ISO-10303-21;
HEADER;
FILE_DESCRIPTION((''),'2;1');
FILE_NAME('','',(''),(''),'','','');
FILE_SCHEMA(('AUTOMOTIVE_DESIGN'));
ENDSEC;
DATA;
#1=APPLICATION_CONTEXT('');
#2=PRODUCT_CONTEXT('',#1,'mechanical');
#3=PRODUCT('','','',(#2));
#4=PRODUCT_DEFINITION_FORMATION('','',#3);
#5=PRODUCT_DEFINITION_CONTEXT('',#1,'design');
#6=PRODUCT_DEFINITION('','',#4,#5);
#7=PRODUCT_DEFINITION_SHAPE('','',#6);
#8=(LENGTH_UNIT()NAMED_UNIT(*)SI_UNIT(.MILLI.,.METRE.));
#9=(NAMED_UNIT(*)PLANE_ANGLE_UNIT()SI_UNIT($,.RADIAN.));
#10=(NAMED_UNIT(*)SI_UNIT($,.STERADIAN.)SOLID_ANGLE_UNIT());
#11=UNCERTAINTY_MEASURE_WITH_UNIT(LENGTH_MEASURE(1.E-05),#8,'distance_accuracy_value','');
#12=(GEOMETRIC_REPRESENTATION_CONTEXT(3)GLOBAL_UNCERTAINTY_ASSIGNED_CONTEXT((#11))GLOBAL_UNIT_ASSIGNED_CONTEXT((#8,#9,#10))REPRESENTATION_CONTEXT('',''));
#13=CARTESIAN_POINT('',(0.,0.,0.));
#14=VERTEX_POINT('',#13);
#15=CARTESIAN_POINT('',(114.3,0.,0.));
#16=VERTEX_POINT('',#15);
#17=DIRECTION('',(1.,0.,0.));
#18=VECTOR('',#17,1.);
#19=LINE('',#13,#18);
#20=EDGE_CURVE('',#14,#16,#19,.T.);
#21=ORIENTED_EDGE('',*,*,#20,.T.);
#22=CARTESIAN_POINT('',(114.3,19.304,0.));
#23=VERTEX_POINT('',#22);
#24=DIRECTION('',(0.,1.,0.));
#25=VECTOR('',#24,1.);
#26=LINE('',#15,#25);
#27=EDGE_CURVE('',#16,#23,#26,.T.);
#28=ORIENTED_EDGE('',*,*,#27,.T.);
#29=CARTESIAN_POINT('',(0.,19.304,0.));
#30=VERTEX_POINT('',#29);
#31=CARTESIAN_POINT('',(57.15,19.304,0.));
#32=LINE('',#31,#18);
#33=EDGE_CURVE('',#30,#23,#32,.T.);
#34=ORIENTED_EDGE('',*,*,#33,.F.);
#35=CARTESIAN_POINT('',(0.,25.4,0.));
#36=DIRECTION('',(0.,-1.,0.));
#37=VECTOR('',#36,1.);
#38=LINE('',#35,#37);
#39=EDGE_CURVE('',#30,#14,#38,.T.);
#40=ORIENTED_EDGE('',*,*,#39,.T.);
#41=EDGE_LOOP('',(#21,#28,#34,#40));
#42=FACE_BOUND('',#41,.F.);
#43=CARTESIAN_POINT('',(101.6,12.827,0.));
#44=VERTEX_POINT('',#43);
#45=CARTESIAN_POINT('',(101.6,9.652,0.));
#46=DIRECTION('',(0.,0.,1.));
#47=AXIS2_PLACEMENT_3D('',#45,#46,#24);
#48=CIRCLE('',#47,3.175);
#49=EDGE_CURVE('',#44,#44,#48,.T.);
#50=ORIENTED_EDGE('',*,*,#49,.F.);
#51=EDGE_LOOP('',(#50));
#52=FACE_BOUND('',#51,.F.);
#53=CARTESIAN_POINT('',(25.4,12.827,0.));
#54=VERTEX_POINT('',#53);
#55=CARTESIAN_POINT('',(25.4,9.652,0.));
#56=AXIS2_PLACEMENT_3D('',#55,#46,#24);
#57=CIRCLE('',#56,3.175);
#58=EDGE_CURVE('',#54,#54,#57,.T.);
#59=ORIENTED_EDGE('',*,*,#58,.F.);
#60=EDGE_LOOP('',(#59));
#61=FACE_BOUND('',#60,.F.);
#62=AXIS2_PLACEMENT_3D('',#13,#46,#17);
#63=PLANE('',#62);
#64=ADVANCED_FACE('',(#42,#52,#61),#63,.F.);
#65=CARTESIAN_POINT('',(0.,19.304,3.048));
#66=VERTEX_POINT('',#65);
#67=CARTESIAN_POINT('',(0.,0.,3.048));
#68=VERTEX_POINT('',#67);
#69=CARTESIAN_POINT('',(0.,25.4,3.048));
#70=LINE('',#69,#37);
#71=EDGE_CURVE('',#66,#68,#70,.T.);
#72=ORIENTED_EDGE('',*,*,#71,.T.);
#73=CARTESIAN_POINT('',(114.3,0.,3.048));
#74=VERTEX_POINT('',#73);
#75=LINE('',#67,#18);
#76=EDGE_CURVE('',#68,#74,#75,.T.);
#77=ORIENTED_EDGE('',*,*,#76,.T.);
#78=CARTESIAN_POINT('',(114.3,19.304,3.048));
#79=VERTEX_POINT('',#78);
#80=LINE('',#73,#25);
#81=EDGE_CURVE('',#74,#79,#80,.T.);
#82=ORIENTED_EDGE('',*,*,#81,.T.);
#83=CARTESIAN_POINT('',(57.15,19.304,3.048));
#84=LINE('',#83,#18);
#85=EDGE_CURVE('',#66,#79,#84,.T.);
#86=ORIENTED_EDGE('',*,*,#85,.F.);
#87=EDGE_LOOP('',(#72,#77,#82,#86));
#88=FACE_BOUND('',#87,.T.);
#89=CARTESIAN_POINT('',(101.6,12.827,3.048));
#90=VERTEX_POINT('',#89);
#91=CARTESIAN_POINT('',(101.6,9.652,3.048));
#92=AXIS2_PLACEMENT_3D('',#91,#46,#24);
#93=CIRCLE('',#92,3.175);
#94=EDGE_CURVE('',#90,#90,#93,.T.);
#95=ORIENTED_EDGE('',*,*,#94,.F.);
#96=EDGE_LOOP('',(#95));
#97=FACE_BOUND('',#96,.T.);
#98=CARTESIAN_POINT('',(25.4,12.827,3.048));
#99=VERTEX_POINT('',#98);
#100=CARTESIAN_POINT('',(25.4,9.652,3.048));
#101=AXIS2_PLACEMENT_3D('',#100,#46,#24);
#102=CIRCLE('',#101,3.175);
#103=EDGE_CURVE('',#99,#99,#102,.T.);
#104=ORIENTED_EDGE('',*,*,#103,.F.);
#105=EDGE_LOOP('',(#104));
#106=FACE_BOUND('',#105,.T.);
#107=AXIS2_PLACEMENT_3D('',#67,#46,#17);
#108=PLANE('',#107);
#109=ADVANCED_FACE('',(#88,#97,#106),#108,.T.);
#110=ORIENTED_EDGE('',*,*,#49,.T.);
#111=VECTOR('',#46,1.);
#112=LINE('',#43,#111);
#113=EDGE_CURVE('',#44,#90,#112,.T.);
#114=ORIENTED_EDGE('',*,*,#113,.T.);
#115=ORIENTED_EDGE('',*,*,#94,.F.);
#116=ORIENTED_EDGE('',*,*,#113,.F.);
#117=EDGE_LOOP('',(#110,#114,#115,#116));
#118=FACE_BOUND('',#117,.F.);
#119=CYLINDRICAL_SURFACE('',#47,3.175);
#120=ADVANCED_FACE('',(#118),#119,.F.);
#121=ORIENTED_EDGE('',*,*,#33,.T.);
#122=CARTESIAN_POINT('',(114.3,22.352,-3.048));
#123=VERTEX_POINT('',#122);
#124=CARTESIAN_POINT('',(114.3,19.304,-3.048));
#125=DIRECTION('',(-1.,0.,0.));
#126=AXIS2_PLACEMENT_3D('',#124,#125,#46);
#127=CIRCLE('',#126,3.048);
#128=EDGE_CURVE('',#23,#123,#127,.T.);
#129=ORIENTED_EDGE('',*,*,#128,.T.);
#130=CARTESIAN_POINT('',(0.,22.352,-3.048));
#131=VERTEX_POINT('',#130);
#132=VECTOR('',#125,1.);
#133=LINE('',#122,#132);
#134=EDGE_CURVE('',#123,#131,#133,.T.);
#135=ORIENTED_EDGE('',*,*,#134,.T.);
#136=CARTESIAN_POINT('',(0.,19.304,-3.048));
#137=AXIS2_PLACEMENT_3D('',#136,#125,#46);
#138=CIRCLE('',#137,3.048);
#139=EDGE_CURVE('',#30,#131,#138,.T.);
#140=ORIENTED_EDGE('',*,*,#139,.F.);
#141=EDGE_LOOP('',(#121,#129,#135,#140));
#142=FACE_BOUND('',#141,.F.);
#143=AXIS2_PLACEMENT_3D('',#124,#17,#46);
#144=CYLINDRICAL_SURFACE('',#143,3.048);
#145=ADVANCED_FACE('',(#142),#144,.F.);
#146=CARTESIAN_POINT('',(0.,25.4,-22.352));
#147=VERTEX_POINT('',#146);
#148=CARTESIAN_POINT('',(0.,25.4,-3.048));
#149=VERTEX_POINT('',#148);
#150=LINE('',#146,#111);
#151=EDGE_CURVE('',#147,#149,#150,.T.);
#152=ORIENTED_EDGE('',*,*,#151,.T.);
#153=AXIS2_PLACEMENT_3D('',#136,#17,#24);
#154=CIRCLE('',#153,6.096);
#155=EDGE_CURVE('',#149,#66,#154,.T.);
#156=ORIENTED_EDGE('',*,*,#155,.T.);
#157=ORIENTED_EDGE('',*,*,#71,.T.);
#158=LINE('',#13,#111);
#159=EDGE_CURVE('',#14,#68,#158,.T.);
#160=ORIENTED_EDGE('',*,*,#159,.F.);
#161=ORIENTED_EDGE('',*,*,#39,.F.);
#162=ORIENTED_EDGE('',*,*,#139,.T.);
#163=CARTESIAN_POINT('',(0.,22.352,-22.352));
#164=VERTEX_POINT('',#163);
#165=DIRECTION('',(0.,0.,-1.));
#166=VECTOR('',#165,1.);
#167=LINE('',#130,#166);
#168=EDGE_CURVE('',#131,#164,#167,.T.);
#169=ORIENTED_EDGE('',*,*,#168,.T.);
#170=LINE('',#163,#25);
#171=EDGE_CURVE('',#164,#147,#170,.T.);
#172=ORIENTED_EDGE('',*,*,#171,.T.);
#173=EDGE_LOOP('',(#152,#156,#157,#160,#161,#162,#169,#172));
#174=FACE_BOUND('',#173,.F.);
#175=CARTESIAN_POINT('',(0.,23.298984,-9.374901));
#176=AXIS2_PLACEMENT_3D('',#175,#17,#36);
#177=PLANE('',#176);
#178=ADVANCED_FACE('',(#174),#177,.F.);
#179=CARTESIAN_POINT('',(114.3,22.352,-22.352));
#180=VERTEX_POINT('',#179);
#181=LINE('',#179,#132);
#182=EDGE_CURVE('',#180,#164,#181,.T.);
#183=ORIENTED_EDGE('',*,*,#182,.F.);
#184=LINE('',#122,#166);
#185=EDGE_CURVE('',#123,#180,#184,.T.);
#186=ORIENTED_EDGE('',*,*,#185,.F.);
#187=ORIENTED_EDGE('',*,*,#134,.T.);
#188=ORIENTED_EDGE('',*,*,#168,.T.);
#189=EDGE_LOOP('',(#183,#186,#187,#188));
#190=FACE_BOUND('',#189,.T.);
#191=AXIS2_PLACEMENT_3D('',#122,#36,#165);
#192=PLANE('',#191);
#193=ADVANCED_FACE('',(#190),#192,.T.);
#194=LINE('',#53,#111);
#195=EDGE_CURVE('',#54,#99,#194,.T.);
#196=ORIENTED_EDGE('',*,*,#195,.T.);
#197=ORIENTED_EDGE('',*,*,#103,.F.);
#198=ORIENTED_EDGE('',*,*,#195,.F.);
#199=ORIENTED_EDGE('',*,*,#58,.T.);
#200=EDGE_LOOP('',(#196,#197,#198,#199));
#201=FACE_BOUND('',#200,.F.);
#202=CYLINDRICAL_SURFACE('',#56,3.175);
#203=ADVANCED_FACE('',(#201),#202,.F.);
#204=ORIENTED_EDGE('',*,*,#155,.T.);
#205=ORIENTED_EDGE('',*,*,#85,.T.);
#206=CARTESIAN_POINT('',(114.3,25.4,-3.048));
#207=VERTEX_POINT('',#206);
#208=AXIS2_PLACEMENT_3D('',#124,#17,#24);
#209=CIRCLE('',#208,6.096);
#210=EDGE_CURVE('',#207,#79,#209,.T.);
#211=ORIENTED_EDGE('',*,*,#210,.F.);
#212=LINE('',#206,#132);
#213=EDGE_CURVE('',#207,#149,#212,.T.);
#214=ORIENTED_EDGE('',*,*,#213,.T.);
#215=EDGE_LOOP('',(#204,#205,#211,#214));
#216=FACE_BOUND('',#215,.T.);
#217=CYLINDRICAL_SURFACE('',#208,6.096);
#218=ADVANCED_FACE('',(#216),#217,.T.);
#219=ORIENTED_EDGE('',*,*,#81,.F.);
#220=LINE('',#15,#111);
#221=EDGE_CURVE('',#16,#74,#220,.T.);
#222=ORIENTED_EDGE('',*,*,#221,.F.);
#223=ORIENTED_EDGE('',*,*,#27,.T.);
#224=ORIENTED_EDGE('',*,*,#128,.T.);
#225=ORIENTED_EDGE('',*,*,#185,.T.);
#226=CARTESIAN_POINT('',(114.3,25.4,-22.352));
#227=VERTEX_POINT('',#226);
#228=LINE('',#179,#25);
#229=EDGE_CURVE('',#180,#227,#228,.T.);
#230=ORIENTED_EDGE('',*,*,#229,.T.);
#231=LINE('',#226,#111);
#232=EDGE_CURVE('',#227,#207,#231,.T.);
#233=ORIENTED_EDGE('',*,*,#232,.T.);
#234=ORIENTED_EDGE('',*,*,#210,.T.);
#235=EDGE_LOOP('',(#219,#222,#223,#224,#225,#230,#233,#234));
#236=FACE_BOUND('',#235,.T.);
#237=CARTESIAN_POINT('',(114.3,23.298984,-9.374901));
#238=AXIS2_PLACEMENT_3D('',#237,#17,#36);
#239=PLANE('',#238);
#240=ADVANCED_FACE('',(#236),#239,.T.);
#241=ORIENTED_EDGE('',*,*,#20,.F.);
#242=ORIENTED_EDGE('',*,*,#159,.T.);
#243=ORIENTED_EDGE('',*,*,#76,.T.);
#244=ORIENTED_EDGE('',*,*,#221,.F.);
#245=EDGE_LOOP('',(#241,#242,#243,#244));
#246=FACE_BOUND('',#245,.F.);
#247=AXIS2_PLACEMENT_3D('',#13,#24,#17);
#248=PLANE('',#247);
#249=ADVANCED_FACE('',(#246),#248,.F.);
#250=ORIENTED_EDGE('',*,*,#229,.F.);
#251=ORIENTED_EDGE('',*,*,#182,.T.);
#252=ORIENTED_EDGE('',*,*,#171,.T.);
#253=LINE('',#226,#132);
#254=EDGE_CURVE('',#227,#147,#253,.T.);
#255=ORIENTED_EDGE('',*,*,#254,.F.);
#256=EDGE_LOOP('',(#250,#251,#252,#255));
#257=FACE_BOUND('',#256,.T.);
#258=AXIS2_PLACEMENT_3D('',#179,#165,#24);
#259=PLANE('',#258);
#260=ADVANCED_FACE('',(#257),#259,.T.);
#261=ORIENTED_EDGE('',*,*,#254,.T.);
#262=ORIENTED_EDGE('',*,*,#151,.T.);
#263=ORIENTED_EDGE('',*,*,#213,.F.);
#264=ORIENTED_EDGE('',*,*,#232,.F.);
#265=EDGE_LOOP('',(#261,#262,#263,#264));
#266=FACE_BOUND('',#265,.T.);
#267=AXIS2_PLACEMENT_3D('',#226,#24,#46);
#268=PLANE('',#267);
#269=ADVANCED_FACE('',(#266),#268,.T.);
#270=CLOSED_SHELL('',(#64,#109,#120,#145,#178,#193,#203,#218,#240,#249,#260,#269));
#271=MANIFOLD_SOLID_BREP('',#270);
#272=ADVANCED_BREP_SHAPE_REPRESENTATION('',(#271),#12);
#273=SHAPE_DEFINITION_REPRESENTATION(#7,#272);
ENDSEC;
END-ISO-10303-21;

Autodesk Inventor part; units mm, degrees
ref_plane "YZ Plane" through (0, 0, 0) normal (1, 0, 0) x (0, 1, 0)
ref_plane "XZ Plane" through (0, 0, 0) normal (0, 1, 0) x (-1, 0, 0)
ref_plane "XY Plane" through (0, 0, 0) normal (0, 0, 1) x (1, 0, 0)
sketch "Sketch1" plane through (0, 0, 0) normal (0, 0, 1) x (1, 0, 0)
  line L0 (0, 0) -> (114.3, 0)
  line L1 (114.3, 0) -> (114.3, 25.4)
  line L2 (114.3, 25.4) -> (0, 25.4)
  line L3 (0, 25.4) -> (0, 0)
  dimension "d0" = 114.3
  dimension "d1" = 25.4
extrude "Plate1" add sketch "Sketch1" along normal blind 3.048
sketch "Sketch2" plane through (114.3, 22.352, 3.048) normal (0, 1, 0) x (-1, 0, 0)
  line L0 (114.3, 0) -> (0, 0)
  line L1 (0, 0) -> (0, -25.4)
  line L2 (0, -25.4) -> (114.3, -25.4)
  line L3 (114.3, -25.4) -> (114.3, 0)
edge flange "Flange1" height 25.4 angle 90 thickness 3.048 bend radius 3.048 thickness toward (0, 1, 0) relief tear relief width 3.048 relief depth 1.524 edges at (57.15, 25.4, 0) wall of the first edge with corners at (0, 22.352, 3.048) (114.3, 22.352, 3.048) (114.3, 22.352, -22.352) (0, 22.352, -22.352)
bend "Bend1"
corner "Corner1"
hole "Hole1" at (101.6, 9.652, 0) direction (0, 0, 1) diameter 6.35 end through all
hole "Hole2" at (25.4, 9.652, 0) direction (0, 0, 1) diameter 6.35 end through all
equation "\"d20\" = Thickness"
equation "\"d29\" = Thickness"
equation "\"d3\" = BendReliefWidth"
equation "\"d4\" = BendReliefDepth"
equation "\"d5\" = MinimumRemnant"
equation "\"d6\" = BendRadius"
equation "\"d9\" = BendRadius"
equation "\"d10\" = CornerReliefSize"
equation "\"d11\" = GapSize"
equation "\"d12\" = JacobiRadiusSize"
equation "\"BendRadius\" = Thickness"
equation "\"BendReliefWidth\" = Thickness"
equation "\"BendReliefDepth\" = 0.5 * Thickness"
equation "\"CornerReliefSize\" = 4 * Thickness"
equation "\"MinimumRemnant\" = 2 * Thickness"
equation "\"TransitionRadius\" = BendRadius"
equation "\"JacobiRadiusSize\" = BendRadius"
equation "\"GapSize\" = Thickness"
equation "\"d2\" = BendRadius"
equation "\"Thickness\" = 3.048"
properties part number "Chain Tension - L Bracket"
